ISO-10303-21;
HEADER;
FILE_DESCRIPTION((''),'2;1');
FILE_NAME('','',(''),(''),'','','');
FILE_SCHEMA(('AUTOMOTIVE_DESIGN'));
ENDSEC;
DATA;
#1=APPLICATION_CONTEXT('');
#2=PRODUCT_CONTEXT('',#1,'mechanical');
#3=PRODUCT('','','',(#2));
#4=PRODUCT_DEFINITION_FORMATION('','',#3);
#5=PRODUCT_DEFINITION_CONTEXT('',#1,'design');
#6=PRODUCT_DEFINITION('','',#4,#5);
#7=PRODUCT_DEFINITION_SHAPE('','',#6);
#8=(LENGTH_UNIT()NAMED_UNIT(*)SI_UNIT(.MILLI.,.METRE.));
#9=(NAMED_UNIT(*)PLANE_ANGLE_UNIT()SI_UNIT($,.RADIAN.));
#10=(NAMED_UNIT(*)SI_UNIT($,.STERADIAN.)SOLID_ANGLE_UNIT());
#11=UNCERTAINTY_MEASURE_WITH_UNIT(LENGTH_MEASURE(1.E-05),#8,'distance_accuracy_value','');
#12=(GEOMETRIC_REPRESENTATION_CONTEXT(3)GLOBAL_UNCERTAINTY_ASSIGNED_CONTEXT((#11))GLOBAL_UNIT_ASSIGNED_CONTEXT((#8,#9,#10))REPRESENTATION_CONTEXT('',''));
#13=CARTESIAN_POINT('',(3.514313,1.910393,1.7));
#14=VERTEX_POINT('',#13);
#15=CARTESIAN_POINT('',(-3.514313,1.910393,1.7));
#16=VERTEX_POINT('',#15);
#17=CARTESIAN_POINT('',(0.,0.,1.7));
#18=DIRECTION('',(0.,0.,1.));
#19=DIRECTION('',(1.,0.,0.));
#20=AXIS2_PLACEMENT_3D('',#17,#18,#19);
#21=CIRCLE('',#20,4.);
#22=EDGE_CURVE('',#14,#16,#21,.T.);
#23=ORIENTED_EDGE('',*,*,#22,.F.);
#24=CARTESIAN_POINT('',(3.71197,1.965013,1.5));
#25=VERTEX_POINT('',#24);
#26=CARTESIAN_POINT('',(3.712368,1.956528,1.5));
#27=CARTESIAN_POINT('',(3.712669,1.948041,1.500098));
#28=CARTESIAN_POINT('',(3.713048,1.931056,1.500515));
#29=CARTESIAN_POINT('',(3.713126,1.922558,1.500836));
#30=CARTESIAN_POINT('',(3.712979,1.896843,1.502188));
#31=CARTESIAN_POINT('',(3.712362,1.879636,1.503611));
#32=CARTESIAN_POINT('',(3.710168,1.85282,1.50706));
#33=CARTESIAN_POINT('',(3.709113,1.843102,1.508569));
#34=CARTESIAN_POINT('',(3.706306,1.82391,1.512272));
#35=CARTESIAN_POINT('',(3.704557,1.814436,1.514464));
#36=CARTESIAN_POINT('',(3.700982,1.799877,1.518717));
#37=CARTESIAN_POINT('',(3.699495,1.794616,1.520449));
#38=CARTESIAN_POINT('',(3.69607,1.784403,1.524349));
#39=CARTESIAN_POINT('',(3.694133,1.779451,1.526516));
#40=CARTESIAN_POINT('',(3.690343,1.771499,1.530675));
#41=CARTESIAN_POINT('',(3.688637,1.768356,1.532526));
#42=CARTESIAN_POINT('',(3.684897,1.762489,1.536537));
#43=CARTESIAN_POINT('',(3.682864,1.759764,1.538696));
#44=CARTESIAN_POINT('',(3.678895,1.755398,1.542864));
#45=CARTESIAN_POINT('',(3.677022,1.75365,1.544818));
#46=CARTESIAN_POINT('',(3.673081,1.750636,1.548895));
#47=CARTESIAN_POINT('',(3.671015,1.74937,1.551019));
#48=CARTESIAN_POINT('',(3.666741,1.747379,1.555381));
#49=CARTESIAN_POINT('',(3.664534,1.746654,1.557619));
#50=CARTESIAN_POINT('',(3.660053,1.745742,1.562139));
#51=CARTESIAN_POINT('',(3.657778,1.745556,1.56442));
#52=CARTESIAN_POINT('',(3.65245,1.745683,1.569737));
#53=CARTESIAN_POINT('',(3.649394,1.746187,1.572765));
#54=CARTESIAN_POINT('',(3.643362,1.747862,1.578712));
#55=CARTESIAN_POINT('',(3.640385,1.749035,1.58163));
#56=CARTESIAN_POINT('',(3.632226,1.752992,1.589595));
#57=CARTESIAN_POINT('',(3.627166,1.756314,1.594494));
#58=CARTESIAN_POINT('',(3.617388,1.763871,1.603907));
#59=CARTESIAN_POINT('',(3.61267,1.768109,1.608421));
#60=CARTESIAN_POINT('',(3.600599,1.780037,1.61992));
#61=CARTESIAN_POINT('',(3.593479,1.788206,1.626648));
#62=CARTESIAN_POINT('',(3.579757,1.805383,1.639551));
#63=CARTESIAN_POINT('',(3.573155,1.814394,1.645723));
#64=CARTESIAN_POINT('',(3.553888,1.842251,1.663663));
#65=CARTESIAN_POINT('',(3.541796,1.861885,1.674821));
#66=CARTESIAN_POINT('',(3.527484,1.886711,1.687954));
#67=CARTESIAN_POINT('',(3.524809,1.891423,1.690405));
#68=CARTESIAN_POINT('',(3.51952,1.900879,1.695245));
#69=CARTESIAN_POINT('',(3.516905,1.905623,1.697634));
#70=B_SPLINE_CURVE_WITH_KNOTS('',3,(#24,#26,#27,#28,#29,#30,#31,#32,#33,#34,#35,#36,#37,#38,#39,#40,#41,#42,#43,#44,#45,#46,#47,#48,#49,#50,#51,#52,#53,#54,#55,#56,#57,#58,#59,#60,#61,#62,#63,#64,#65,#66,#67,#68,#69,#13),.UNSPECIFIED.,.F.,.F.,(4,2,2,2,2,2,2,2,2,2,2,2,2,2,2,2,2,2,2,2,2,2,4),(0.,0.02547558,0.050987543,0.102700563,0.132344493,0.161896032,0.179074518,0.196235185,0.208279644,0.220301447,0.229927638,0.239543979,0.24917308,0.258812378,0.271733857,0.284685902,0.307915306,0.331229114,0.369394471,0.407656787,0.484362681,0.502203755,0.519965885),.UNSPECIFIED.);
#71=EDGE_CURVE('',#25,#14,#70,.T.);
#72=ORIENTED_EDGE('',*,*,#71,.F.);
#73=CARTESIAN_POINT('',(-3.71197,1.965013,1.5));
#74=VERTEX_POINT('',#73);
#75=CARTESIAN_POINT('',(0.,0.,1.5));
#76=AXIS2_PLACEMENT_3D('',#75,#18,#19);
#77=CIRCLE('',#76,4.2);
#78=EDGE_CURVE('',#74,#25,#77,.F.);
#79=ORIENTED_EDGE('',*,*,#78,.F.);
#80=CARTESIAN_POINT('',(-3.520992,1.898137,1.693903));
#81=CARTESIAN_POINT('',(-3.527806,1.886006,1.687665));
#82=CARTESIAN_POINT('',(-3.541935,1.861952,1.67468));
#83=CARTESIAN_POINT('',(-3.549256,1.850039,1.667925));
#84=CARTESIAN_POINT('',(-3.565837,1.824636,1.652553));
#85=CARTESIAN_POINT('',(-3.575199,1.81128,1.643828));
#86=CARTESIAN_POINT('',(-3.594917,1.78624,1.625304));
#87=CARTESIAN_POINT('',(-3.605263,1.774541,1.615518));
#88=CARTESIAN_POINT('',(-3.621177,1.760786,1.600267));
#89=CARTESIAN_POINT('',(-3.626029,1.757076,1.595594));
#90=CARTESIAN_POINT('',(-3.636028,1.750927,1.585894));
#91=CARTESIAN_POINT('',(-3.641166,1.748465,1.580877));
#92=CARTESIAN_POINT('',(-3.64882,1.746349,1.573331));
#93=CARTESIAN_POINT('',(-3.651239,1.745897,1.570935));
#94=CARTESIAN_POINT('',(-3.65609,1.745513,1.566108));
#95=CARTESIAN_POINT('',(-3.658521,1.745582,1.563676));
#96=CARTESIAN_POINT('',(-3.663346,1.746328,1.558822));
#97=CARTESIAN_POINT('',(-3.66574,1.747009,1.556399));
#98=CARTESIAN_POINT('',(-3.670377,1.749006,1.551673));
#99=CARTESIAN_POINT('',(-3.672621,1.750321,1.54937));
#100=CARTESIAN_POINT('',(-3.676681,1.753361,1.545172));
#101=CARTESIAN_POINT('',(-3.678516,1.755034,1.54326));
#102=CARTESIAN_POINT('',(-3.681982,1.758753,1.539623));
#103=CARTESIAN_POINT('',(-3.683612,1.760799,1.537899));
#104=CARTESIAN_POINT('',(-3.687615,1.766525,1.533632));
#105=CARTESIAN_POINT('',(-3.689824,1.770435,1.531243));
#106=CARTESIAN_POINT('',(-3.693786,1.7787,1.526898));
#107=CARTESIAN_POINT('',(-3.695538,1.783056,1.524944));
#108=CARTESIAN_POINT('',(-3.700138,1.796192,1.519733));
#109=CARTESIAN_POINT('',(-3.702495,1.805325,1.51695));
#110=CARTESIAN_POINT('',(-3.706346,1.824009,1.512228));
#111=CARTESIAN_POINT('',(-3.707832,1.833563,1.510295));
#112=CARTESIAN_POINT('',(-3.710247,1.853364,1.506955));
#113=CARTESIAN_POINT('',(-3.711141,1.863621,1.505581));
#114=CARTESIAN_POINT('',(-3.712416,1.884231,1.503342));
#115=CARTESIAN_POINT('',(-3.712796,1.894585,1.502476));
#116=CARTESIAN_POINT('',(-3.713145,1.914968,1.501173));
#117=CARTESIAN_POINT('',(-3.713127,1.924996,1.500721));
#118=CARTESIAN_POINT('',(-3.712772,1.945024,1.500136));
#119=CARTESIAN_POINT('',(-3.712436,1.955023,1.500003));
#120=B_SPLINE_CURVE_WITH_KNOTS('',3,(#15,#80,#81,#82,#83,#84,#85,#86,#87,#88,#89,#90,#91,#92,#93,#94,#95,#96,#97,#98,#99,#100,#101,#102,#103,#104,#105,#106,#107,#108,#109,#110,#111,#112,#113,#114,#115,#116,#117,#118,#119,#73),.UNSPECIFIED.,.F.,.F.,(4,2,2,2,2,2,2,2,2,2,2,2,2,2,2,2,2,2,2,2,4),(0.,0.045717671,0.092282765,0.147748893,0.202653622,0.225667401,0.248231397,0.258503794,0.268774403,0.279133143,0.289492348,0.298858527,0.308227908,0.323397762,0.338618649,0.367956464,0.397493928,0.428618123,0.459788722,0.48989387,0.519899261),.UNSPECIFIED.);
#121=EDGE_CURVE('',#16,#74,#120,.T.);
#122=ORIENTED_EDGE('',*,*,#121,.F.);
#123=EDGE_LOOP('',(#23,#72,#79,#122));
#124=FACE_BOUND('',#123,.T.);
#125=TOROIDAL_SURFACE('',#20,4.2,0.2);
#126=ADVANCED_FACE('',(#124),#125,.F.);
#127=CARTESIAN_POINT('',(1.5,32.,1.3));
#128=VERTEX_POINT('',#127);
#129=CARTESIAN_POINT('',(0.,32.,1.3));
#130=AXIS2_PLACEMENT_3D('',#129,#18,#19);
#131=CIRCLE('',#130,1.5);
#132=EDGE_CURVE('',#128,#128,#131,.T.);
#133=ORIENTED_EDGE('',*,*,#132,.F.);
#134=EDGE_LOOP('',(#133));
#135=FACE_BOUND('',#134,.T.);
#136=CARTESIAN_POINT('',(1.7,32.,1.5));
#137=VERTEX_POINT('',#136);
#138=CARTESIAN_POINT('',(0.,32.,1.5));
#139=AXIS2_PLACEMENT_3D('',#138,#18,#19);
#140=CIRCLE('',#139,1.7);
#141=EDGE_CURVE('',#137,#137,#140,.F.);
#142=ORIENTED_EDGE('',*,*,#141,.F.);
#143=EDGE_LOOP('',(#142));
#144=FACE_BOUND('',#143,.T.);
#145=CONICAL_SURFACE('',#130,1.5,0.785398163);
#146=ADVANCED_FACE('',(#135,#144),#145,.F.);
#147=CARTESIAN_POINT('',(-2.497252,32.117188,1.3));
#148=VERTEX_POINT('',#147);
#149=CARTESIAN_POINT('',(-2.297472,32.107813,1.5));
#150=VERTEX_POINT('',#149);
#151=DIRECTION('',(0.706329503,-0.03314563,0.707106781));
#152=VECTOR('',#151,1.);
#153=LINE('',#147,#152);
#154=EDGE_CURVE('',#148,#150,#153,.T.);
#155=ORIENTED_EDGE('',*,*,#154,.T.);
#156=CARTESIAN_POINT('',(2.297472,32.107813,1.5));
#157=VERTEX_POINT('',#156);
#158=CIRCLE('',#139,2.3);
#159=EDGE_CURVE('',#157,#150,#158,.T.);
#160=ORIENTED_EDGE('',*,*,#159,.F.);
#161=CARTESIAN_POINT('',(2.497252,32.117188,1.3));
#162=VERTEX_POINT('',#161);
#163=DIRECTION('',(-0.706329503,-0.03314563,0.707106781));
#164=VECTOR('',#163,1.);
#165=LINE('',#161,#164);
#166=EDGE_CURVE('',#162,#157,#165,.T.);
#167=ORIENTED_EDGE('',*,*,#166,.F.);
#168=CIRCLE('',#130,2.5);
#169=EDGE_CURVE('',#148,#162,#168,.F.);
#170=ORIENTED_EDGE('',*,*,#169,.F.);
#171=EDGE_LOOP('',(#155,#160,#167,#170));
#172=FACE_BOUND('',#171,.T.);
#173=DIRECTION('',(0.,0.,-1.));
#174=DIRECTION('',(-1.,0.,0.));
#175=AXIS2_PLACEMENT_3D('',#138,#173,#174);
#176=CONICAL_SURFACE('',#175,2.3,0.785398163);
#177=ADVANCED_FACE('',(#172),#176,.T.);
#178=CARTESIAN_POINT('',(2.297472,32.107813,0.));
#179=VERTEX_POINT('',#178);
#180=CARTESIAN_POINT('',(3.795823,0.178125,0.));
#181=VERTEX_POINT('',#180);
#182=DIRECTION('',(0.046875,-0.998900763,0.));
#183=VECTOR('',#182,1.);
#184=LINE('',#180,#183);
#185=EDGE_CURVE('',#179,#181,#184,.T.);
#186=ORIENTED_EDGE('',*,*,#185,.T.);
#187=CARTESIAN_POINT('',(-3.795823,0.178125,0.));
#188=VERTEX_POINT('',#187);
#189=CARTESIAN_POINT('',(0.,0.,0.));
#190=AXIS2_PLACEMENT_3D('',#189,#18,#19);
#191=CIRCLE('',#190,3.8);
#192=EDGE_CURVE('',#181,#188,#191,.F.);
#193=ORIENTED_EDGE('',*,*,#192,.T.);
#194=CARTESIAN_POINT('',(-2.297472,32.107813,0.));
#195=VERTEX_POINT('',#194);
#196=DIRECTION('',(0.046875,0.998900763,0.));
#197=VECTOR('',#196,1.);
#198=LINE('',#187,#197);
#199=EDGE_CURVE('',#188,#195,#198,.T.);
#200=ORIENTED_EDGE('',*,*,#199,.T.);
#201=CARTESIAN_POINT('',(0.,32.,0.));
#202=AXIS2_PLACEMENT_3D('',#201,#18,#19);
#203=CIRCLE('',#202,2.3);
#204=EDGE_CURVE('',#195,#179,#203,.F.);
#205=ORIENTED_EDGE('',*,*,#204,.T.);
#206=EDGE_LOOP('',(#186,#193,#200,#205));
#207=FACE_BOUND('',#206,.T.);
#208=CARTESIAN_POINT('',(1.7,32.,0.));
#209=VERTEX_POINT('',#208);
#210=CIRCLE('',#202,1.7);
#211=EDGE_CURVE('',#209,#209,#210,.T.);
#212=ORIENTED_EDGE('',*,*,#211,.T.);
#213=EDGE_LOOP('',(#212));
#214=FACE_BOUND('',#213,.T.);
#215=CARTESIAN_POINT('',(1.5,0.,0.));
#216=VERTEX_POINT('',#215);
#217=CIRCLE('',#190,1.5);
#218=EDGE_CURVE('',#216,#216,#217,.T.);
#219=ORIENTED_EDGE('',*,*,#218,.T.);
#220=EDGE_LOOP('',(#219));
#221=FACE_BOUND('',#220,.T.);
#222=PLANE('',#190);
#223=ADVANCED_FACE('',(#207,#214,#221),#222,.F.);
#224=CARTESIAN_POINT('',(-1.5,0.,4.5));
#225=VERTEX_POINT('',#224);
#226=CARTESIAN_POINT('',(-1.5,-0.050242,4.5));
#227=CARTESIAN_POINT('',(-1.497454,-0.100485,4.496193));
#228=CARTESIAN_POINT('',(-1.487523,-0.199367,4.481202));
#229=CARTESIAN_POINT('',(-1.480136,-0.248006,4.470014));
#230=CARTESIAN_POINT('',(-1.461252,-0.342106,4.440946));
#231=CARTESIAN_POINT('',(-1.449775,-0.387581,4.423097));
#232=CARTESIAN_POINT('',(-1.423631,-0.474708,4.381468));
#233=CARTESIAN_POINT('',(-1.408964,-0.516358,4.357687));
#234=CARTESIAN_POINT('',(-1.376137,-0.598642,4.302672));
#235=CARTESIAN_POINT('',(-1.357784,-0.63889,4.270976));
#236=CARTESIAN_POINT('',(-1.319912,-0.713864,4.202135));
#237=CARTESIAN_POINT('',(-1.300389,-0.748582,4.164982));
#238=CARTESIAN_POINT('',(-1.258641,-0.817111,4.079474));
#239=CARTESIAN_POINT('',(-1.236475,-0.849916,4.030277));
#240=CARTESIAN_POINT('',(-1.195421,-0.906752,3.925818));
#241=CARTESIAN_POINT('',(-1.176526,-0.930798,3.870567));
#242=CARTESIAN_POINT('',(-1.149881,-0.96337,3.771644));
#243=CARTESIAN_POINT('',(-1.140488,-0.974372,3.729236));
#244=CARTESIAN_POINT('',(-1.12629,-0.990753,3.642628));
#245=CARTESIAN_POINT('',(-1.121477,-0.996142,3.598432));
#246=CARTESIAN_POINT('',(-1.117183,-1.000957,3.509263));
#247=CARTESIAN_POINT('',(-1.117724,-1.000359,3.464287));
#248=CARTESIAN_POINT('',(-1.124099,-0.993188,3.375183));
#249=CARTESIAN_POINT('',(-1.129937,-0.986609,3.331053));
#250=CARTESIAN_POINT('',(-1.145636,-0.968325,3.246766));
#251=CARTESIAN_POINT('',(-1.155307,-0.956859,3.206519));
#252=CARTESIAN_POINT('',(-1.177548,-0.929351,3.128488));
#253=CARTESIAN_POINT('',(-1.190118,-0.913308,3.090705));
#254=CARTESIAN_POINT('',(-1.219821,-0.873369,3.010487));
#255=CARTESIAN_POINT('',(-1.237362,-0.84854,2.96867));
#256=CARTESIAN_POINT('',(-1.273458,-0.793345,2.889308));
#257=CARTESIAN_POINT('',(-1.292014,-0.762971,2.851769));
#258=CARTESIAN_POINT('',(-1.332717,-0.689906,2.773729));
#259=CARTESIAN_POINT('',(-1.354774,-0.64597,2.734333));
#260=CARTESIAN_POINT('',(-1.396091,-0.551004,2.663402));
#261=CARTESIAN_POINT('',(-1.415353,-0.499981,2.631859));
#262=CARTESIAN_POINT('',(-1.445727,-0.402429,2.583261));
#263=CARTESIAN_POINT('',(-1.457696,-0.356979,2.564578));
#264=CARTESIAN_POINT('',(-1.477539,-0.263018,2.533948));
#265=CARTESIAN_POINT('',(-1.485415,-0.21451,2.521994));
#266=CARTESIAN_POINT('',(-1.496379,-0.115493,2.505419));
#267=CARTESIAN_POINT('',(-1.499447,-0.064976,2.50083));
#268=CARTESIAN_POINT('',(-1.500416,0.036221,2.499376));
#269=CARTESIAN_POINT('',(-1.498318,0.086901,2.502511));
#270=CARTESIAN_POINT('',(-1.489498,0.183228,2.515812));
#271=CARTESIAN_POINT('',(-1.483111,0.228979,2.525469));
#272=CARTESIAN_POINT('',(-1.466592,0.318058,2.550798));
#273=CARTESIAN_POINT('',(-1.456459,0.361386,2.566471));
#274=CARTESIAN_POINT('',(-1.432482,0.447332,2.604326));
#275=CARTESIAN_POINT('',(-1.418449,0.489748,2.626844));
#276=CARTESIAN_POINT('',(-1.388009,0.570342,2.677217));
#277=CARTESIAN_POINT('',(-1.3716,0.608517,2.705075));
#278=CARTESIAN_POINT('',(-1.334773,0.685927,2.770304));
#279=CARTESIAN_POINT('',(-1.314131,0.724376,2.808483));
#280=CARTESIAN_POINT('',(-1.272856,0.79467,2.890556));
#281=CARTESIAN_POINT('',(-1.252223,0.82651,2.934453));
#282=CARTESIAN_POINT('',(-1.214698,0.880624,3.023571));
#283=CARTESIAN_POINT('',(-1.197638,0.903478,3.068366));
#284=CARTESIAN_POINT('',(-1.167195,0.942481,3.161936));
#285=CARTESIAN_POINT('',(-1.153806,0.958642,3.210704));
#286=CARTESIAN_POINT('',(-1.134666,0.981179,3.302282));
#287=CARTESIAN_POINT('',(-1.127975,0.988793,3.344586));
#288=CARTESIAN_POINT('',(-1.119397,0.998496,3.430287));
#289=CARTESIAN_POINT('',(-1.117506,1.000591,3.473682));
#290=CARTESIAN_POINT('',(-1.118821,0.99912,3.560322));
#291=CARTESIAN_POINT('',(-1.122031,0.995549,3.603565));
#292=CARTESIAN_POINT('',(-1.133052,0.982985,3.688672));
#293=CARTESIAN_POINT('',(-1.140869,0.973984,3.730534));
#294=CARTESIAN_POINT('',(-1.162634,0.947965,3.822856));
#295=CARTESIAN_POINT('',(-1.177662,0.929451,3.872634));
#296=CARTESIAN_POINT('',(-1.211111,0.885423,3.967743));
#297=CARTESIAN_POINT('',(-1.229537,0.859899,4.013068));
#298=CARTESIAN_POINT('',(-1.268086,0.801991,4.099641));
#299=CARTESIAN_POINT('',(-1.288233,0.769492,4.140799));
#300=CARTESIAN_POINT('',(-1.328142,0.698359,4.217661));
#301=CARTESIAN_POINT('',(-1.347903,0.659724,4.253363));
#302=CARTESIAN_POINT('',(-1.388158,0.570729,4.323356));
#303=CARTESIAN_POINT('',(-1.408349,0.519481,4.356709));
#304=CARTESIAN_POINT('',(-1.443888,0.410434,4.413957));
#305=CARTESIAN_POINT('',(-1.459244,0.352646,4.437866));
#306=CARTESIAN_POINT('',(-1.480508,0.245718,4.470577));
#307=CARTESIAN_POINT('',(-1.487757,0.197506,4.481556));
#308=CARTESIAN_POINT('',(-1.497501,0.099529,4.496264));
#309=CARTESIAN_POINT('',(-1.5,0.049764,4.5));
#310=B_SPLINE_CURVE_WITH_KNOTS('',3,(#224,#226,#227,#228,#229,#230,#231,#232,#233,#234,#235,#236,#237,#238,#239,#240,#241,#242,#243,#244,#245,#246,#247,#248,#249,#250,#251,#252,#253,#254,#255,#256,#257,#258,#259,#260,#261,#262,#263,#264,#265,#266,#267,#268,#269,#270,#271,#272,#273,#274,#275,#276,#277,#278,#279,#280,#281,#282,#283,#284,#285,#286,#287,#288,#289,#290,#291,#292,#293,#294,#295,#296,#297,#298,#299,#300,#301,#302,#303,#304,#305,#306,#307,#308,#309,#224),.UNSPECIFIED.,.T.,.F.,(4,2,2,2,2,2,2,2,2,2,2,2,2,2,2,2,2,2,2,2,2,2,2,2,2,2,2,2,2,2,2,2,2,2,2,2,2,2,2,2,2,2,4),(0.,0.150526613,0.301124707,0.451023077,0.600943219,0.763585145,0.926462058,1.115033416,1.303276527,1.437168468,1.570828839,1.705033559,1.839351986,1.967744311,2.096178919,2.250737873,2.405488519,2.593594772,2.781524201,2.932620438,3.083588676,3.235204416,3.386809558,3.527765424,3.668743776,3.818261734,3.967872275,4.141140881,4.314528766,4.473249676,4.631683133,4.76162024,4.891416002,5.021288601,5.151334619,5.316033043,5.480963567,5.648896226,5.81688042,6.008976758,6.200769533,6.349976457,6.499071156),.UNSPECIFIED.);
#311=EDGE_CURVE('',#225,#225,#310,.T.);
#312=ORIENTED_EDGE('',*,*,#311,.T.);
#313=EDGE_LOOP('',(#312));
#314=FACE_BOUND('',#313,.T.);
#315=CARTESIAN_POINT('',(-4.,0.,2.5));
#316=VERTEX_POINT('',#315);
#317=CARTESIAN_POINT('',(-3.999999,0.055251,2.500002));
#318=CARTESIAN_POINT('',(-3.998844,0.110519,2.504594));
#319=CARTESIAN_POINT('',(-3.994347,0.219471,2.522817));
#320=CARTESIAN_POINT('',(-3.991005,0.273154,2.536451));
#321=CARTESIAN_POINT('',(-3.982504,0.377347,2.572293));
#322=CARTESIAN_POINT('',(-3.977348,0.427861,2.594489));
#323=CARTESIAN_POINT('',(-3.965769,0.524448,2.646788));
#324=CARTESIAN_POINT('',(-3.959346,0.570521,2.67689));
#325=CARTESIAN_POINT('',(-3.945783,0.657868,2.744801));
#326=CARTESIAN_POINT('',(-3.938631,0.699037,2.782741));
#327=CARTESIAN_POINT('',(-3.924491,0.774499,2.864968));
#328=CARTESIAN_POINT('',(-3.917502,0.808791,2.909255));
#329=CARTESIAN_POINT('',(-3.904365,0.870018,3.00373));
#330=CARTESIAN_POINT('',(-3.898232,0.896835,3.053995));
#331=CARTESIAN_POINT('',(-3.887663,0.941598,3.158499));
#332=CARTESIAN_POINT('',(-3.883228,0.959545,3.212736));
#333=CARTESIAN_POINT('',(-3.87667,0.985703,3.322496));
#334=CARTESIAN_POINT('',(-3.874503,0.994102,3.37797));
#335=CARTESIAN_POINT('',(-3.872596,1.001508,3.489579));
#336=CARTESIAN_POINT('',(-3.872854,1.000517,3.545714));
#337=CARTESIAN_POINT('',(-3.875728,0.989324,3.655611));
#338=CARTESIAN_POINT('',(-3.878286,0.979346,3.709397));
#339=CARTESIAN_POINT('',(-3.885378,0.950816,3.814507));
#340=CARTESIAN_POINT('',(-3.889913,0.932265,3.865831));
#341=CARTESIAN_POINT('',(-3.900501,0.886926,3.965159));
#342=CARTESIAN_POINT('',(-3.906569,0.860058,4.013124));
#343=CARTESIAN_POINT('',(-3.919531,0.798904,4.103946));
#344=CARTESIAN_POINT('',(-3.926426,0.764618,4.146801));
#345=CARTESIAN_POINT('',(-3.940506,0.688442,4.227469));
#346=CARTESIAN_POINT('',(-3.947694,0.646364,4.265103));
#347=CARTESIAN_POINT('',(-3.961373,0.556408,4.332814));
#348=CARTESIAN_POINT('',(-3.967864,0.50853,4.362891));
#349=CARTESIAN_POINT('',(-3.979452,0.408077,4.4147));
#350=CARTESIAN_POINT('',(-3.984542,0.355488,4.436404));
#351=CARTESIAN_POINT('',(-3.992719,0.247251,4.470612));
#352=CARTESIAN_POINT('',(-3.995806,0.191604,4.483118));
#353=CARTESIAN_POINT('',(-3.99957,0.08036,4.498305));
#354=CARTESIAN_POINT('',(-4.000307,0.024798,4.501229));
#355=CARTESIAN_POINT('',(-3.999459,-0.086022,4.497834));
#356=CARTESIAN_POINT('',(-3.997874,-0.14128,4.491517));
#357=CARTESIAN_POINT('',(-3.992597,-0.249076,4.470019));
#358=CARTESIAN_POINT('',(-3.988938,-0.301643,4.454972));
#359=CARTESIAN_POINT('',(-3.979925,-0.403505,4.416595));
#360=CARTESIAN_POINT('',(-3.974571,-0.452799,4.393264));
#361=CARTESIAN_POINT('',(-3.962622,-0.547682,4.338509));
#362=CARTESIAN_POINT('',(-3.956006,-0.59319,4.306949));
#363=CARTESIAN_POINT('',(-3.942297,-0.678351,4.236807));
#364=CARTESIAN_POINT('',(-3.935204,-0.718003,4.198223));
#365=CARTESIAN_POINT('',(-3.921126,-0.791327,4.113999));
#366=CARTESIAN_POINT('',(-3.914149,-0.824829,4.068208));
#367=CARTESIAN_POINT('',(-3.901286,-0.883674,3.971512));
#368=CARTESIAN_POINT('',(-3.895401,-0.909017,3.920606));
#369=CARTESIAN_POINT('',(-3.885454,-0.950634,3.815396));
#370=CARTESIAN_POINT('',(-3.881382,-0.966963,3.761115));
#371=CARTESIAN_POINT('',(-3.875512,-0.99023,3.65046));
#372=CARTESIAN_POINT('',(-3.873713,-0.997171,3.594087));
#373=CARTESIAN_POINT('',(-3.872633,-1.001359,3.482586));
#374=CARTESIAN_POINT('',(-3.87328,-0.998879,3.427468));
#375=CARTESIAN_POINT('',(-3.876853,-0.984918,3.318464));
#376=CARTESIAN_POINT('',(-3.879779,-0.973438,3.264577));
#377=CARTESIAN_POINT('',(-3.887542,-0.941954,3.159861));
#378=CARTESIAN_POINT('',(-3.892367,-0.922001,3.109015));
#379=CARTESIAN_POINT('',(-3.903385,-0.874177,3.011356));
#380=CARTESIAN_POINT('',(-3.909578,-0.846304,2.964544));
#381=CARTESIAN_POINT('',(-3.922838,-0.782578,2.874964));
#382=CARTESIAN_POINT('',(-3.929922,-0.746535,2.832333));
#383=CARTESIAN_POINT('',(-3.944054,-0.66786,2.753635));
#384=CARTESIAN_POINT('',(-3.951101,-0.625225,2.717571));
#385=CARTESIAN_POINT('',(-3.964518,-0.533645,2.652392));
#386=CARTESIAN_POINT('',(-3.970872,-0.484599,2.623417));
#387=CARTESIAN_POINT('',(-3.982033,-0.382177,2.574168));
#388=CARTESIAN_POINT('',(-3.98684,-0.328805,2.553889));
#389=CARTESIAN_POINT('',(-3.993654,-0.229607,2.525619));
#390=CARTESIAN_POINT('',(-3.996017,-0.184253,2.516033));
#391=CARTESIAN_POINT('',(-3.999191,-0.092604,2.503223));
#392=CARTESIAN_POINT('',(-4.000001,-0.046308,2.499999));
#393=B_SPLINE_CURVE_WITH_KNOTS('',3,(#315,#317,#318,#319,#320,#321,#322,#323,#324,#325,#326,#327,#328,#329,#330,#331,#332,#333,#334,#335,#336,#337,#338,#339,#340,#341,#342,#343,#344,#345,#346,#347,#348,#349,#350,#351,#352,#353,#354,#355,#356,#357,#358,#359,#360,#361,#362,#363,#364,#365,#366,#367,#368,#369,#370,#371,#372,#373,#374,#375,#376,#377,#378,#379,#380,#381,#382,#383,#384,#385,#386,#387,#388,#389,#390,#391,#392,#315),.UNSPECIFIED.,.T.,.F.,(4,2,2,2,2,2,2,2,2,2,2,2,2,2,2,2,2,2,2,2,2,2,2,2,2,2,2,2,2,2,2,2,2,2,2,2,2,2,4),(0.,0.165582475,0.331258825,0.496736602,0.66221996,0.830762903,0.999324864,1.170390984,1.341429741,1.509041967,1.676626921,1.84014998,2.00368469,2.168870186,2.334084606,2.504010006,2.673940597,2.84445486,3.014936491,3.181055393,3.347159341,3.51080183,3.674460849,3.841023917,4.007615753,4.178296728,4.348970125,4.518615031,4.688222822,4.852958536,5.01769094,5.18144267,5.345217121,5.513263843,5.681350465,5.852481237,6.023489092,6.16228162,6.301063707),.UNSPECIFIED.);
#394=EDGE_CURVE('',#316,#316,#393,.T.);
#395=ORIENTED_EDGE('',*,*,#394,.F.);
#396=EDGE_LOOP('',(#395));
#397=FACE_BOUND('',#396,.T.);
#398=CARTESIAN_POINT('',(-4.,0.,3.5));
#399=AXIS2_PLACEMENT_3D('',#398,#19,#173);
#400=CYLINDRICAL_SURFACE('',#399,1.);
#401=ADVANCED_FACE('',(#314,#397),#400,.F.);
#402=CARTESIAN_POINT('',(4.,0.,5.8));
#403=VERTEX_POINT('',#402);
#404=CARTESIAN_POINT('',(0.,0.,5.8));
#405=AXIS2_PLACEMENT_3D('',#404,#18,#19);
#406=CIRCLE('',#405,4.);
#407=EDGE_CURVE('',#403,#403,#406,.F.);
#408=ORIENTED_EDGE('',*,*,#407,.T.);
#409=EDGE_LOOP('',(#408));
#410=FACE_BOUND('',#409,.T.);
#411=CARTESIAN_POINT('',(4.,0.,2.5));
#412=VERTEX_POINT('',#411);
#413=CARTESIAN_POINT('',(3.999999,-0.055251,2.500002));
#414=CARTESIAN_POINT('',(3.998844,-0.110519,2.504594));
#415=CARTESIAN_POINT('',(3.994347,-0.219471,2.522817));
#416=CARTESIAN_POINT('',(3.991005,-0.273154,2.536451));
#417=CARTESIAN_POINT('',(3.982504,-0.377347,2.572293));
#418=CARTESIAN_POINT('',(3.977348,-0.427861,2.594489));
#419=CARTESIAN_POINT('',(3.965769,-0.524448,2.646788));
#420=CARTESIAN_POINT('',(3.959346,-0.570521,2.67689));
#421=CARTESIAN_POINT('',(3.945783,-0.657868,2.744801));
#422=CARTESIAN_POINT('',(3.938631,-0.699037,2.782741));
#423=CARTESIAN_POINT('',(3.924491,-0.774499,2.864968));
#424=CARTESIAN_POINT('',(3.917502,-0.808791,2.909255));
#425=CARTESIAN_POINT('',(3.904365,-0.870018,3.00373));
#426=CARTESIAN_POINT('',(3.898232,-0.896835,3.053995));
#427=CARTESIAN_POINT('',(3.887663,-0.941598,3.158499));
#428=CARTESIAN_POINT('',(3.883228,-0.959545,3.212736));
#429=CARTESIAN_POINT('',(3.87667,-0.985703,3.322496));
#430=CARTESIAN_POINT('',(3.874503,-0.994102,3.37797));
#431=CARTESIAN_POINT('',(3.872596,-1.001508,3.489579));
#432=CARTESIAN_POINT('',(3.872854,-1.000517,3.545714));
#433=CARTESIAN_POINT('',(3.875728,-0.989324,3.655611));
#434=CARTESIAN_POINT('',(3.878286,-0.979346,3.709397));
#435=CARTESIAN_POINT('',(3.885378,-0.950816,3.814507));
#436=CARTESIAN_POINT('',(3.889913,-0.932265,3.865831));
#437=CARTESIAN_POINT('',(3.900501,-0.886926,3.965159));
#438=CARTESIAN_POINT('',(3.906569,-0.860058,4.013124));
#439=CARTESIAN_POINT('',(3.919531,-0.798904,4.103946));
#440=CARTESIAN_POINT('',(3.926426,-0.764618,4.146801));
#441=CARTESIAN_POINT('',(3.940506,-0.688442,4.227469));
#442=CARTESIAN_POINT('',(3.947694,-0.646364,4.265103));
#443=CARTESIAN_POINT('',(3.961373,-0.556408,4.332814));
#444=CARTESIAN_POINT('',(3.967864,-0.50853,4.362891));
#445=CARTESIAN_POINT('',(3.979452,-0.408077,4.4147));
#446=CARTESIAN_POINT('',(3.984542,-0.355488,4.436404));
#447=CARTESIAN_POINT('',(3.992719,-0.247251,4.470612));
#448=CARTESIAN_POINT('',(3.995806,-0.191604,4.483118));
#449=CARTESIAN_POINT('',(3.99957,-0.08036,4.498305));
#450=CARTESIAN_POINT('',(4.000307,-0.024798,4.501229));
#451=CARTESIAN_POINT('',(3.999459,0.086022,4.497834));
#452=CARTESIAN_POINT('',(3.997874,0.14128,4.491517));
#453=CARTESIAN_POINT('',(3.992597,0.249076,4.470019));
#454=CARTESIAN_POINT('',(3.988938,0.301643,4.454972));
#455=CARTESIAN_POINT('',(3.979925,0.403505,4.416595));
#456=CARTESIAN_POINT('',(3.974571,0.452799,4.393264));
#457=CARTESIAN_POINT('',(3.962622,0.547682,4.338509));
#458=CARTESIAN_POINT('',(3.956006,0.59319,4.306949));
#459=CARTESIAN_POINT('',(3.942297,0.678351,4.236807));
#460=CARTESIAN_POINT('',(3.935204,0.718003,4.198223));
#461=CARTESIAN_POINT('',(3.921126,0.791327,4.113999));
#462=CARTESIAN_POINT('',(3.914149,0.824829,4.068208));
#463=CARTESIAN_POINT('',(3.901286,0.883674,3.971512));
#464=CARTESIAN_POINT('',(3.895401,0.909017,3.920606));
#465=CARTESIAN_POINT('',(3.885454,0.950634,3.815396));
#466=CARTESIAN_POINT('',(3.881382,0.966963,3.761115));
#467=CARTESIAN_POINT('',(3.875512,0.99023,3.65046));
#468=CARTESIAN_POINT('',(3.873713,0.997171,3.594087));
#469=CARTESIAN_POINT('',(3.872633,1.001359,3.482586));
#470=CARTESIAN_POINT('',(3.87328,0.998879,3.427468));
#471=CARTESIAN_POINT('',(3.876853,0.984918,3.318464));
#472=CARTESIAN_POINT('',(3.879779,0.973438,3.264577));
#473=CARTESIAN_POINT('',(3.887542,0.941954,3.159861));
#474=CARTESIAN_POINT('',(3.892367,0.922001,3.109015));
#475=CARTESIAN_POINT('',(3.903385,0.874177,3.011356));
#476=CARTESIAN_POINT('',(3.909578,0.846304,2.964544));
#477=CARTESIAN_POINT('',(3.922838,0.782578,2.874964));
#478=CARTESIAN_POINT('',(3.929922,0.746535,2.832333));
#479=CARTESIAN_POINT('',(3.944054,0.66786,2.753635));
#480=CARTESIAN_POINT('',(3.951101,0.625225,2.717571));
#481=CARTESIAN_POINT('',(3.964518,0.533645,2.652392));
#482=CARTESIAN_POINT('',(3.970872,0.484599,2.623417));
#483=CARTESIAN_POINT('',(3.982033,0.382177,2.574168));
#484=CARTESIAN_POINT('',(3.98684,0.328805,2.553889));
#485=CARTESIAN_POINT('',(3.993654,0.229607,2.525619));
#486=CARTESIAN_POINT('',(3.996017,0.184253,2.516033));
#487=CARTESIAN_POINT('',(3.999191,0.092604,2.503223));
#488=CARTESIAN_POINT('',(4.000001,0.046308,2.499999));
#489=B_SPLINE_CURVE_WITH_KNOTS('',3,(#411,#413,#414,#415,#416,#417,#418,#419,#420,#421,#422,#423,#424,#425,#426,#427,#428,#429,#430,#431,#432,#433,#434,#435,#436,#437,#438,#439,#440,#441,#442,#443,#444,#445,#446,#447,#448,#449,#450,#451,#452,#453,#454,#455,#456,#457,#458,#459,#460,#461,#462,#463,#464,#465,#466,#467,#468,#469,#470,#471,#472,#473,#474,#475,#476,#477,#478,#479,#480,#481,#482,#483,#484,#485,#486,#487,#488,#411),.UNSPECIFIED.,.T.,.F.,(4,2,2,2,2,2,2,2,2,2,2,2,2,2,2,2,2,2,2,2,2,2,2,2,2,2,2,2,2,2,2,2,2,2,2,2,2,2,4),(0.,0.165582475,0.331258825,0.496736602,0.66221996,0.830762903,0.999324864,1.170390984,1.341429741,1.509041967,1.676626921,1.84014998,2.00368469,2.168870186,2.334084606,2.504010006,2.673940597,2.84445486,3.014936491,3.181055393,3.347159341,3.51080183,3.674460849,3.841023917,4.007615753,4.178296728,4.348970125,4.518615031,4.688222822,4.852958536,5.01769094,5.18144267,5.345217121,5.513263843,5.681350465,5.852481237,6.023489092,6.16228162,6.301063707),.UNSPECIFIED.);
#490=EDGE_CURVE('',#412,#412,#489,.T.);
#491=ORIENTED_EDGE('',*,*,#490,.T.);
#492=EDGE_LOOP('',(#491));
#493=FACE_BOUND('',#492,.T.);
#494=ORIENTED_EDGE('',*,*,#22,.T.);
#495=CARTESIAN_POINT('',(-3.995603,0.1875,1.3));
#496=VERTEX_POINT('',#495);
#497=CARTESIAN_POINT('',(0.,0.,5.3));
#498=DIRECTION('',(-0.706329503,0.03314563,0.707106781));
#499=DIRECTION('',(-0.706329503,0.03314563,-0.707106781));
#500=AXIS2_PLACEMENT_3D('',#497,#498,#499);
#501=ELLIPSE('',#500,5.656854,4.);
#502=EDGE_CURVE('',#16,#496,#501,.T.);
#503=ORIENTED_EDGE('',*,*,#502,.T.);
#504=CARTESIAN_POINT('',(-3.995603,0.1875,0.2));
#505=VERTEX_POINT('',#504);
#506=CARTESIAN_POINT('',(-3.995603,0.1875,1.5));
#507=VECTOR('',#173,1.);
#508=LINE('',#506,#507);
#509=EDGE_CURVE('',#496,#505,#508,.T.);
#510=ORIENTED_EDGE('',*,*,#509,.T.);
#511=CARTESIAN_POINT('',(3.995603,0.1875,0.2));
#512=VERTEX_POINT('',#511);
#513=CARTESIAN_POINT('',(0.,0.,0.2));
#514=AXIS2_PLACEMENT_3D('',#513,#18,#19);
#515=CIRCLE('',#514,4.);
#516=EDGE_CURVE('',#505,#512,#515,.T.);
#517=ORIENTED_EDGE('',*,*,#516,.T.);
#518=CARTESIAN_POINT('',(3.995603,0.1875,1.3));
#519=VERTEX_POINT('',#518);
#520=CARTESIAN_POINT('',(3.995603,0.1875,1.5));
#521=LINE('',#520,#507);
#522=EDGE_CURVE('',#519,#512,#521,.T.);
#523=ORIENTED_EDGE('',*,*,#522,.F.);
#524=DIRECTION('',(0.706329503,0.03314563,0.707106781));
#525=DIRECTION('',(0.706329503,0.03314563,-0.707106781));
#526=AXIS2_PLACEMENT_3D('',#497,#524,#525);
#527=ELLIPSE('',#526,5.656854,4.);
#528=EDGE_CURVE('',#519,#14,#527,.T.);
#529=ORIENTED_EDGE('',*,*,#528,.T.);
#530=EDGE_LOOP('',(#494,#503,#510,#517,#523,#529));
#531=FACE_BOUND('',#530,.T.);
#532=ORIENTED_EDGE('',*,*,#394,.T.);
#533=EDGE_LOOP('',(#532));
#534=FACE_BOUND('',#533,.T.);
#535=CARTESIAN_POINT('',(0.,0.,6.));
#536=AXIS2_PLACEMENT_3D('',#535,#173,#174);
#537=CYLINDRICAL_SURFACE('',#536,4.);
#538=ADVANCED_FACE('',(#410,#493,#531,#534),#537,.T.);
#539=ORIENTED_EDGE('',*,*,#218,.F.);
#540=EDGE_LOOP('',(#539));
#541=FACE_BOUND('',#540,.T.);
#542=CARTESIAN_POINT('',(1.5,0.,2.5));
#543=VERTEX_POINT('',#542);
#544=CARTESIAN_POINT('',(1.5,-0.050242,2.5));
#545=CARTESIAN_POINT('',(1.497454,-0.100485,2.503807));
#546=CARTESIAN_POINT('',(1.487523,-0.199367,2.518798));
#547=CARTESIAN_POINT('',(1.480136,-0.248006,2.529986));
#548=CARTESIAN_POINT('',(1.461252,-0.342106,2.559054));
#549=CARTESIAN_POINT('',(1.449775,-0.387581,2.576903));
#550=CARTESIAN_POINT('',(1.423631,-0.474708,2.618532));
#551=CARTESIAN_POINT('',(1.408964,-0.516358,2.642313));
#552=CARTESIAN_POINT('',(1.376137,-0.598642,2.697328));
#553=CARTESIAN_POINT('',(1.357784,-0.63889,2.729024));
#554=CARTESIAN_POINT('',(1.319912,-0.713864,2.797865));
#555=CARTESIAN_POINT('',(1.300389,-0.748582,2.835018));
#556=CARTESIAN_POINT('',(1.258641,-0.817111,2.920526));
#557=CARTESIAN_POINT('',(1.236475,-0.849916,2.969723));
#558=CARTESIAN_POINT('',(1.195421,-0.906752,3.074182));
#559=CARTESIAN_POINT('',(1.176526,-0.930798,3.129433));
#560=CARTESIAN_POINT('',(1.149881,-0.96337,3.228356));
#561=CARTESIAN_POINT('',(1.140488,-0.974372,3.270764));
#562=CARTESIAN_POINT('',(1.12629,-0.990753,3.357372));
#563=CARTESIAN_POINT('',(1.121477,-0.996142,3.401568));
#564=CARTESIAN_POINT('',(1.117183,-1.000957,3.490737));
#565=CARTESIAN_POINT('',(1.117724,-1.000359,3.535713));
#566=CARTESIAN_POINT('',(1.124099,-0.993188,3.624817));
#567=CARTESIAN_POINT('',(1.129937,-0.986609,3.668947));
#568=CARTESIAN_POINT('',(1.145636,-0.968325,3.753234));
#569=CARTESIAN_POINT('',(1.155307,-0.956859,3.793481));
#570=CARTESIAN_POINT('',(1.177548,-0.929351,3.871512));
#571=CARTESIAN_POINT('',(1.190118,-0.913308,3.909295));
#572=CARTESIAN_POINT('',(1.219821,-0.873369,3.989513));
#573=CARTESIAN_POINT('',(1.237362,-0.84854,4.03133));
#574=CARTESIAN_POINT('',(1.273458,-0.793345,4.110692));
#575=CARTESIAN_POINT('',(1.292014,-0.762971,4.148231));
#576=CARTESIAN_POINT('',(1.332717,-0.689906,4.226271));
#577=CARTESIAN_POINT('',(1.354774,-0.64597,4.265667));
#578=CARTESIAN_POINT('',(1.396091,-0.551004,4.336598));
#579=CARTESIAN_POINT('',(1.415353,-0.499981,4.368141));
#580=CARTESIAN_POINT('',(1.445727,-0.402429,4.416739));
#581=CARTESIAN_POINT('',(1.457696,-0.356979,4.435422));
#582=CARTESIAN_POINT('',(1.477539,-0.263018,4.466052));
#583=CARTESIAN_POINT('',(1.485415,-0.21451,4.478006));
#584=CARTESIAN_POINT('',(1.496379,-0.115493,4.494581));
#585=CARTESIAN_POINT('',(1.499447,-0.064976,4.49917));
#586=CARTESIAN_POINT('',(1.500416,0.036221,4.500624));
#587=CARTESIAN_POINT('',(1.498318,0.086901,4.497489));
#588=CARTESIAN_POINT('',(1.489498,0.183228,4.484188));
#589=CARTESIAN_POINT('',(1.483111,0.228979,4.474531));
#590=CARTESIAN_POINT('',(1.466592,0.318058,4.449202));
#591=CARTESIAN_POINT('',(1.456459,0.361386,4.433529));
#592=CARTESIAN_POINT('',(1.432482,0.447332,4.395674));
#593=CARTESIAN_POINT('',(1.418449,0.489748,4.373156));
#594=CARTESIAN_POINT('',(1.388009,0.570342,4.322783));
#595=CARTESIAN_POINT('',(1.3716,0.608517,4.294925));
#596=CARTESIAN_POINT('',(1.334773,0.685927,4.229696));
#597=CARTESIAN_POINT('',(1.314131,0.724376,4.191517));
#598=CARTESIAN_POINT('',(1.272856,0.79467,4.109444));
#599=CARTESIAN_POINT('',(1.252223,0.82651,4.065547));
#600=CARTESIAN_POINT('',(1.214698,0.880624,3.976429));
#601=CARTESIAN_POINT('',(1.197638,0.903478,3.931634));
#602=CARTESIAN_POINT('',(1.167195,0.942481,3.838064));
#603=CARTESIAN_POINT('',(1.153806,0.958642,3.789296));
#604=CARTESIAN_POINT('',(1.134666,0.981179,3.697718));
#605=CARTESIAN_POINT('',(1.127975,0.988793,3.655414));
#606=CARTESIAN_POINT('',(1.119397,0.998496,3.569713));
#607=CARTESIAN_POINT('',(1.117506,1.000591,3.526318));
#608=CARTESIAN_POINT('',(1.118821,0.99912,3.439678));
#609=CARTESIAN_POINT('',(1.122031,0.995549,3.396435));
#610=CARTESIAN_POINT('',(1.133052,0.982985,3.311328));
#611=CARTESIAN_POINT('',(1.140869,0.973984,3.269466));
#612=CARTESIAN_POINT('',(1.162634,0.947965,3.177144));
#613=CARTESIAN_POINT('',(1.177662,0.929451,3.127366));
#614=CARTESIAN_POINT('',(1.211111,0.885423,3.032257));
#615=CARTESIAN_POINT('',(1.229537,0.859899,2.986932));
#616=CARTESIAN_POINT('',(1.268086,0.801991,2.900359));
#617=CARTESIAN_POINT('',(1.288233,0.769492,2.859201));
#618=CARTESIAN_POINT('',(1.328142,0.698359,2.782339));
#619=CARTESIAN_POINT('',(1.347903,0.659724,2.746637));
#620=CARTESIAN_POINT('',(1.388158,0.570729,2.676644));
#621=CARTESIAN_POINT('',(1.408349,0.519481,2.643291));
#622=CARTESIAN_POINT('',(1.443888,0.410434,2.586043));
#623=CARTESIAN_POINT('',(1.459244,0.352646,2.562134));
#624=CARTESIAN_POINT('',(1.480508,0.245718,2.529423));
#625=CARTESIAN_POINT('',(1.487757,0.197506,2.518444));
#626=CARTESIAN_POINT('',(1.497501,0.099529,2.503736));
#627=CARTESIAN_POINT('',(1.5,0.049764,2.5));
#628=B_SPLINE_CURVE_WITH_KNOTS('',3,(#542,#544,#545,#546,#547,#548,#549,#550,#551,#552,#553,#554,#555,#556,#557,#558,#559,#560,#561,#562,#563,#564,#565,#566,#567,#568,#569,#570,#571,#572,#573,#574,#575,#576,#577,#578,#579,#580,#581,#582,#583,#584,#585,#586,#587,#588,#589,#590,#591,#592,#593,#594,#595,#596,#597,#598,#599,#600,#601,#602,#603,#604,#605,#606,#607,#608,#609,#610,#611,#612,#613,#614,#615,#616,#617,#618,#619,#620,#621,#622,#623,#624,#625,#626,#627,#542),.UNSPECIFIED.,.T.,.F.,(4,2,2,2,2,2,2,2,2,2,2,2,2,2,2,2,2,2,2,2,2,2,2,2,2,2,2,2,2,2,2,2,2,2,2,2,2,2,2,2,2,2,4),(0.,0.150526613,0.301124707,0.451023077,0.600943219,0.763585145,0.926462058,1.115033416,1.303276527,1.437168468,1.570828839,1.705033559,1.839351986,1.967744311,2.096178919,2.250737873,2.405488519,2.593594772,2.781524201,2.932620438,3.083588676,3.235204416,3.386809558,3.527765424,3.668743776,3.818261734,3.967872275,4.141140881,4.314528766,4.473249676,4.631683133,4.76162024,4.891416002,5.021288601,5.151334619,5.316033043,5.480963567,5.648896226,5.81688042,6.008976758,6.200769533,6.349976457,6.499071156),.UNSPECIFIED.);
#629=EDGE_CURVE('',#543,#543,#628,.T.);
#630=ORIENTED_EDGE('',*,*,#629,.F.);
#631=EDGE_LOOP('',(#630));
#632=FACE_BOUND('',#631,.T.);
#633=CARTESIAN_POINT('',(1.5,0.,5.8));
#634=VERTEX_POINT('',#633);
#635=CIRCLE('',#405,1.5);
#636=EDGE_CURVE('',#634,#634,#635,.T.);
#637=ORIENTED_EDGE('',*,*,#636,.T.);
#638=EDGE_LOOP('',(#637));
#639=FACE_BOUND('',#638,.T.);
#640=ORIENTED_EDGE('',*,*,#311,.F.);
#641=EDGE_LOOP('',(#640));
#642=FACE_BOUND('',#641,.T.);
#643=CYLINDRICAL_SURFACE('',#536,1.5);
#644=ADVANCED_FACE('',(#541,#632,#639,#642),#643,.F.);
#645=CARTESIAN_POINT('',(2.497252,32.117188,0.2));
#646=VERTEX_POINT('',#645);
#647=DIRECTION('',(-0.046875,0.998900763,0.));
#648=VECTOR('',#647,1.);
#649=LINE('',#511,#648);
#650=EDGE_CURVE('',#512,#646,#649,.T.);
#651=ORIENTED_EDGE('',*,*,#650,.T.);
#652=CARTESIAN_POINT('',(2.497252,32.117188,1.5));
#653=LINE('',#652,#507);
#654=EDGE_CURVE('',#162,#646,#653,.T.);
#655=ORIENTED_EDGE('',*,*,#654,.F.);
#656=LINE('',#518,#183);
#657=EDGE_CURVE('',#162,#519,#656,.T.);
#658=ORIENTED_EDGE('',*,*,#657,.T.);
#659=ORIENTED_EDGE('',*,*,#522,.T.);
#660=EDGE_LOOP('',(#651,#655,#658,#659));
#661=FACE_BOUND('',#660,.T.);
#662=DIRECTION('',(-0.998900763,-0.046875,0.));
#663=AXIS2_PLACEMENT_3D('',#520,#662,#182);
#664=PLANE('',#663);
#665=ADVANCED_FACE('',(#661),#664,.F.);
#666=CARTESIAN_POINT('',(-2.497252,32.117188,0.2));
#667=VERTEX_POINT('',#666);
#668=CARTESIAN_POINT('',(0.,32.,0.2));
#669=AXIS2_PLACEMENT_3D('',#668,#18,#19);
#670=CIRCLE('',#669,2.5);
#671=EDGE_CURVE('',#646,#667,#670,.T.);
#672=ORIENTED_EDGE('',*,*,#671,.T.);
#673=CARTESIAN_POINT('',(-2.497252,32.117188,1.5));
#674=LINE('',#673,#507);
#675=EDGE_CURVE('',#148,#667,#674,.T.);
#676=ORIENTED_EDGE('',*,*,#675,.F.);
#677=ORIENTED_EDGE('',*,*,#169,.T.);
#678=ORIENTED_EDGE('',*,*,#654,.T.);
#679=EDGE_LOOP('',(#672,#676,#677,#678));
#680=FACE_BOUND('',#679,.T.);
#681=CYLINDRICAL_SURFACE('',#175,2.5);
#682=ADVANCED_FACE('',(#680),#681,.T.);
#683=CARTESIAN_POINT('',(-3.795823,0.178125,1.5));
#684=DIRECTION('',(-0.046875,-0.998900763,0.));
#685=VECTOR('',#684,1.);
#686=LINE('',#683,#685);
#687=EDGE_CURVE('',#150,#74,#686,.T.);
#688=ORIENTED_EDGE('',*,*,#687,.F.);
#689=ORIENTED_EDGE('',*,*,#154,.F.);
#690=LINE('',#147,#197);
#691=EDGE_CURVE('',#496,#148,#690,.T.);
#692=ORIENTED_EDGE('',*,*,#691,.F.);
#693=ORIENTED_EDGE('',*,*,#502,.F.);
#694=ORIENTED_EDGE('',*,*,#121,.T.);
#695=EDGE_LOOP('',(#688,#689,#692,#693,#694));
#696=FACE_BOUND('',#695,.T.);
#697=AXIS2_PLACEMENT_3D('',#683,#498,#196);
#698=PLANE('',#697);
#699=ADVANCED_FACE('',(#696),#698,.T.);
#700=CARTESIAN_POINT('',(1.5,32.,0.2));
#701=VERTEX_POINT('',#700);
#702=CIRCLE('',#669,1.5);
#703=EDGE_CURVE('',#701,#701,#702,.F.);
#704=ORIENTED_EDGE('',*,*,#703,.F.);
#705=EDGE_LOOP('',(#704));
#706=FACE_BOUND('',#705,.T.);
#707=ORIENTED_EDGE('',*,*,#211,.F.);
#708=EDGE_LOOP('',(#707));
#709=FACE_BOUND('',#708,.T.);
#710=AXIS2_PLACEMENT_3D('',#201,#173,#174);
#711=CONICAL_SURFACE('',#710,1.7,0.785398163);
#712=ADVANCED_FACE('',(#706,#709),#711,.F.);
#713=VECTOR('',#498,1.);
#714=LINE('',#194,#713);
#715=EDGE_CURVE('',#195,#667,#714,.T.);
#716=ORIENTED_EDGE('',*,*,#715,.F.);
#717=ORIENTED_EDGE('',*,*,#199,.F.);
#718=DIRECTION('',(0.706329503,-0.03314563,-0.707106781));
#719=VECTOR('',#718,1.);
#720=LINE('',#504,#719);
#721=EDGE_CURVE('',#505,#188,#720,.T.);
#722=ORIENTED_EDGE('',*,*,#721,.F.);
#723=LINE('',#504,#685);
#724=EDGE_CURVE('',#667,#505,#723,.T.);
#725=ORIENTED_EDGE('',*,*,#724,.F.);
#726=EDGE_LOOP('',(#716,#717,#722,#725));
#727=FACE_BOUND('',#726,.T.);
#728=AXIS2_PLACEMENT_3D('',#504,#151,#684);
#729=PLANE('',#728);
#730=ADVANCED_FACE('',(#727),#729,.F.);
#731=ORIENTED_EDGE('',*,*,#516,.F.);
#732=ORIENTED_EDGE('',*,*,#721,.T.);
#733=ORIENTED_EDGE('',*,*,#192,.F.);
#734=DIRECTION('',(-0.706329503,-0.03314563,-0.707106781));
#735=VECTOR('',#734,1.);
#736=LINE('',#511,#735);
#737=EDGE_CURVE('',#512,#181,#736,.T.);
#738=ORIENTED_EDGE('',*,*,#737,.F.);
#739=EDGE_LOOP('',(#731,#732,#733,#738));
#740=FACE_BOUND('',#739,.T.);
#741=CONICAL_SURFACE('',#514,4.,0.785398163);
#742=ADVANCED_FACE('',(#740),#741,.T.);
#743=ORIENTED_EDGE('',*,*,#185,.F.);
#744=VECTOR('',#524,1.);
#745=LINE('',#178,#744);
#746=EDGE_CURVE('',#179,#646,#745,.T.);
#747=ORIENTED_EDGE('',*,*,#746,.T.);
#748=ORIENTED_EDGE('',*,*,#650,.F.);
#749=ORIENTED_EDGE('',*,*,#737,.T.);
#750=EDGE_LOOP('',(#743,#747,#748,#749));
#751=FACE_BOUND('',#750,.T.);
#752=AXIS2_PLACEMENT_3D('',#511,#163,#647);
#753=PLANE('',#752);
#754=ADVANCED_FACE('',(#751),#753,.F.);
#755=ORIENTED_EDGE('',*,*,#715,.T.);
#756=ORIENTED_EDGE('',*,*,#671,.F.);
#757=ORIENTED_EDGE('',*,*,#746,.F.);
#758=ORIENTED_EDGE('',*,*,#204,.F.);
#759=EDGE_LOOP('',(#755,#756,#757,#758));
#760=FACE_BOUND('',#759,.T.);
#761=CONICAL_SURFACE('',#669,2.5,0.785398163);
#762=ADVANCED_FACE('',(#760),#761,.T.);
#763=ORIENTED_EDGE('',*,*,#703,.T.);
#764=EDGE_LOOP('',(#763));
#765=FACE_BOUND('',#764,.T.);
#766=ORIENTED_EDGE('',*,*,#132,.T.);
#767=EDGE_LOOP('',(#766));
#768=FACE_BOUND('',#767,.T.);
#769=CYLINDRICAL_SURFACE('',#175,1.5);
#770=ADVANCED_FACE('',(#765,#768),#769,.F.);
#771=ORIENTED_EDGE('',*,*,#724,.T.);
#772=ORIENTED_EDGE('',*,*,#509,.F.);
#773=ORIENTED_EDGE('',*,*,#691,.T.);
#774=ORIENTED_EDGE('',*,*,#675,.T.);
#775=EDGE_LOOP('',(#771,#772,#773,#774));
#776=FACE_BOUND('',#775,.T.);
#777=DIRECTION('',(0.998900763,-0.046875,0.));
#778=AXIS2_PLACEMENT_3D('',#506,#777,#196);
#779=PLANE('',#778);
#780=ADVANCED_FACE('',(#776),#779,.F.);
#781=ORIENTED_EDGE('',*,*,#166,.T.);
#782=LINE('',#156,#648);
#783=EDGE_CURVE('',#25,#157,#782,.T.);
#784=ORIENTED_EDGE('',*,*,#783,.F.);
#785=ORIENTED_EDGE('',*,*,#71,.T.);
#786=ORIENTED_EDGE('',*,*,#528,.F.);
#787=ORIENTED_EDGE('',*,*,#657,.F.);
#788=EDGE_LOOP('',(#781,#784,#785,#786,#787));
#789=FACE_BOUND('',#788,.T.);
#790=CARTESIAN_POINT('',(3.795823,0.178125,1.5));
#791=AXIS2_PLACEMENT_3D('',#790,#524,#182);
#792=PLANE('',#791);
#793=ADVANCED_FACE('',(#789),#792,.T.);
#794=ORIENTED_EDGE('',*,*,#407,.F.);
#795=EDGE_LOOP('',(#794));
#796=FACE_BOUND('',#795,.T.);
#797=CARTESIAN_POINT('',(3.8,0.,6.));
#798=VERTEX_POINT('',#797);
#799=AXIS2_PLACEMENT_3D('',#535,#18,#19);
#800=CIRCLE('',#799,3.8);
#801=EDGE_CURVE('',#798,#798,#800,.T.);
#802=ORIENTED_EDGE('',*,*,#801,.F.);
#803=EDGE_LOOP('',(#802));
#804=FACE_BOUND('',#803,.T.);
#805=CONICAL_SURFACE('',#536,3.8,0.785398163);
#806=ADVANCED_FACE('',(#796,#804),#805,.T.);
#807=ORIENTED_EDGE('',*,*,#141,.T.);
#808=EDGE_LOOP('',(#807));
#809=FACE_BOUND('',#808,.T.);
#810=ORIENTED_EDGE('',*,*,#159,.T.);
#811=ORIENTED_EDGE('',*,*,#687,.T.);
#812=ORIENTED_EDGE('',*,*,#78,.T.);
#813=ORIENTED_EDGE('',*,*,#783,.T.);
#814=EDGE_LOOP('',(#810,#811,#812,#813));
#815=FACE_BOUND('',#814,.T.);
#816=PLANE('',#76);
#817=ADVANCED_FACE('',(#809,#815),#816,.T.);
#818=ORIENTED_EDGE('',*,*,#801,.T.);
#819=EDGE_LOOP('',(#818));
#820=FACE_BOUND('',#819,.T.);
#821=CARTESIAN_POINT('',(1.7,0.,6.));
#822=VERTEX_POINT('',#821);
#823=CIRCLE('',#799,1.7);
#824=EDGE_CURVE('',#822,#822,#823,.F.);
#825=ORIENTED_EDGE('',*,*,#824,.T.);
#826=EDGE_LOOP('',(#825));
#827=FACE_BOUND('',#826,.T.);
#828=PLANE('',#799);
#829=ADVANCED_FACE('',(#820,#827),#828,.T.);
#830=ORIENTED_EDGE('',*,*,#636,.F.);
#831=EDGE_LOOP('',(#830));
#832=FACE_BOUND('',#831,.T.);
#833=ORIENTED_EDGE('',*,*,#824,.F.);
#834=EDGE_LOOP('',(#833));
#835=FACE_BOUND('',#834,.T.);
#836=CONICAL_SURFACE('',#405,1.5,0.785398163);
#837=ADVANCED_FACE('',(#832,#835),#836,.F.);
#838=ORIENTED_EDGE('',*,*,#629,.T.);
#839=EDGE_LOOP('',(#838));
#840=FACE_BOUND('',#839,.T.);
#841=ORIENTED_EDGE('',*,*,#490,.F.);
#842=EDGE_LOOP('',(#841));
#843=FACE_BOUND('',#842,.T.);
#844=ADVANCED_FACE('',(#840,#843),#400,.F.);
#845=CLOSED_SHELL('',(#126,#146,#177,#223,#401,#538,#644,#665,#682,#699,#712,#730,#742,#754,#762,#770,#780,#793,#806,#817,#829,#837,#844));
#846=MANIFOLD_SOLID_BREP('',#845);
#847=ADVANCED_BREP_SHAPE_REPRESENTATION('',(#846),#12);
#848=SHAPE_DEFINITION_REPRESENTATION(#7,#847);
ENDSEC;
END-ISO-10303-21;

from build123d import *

# Parameters (mm, degrees)
SKETCH1_R               = 4
SKETCH1_R_2             = 1.5
BOSS_EXTRUDE1_DEPTH     = 6
SKETCH2_R               = 1.5000000000000004
BOSS_EXTRUDE2_DEPTH     = 1.5
CUT_EXTRUDE1_DEPTH      = 36.245567097154215
CUT_EXTRUDE1_DEPTH_BACK = 36.245567097154215
SKETCH3_R               = 1.0000000000000002
CHAMFER1_SIZE           = 0.2
FILLET1_R               = 0.2


with BuildPart() as part:
    # Sketch1 → Boss-Extrude1 (new body)
    with BuildSketch(Plane.XY):
        Circle(SKETCH1_R)
        Circle(SKETCH1_R_2, mode=Mode.SUBTRACT)
    extrude(amount=BOSS_EXTRUDE1_DEPTH)

    # Sketch2 → Boss-Extrude2 (add)
    with BuildSketch(Plane.XY):
        with BuildLine():
            Line((-3.995603052106154, 0.18750000000000017), (-2.4972519075663464, 32.1171875))
            ThreePointArc((-2.4972519075663464, 32.1171875), (1.5e-16, 34.5), (2.4972519075663464, 32.1171875))
            Line((2.4972519075663464, 32.1171875), (3.995603052106154, 0.18750000000000017))
            ThreePointArc((3.995603052106154, 0.18750000000000017), (2.4e-16, 4.000000000000002), (-3.995603052106154, 0.18750000000000017))
        make_face()
        with Locations((0, 32)):
            Circle(SKETCH2_R, mode=Mode.SUBTRACT)
    extrude(amount=BOSS_EXTRUDE2_DEPTH)

    # Sketch3 → Cut-Extrude1 (cut, two sides: drawn at the far end of the back side and taken through both)
    with BuildSketch(Plane(origin=(0, 0, 0), x_dir=(0, 0, -1), z_dir=(1, 0, 0)).offset(-CUT_EXTRUDE1_DEPTH_BACK)):
        with Locations((-3.5, 0)):
            Circle(SKETCH3_R)
    extrude(amount=CUT_EXTRUDE1_DEPTH + CUT_EXTRUDE1_DEPTH_BACK, mode=Mode.SUBTRACT)

    # Chamfer1
    # the kernel refuses this chamfer: 0.2 mm, written as the material it takes off along each edge
    with BuildSketch(Plane(origin=(0, 0, 0), x_dir=(-0.9989007630265381, 0.04687500000000028, 0), z_dir=(0.04687500000000028, 0.9989007630265381, 0))) as chamfer1_piece_1:
        Polygon((4, CHAMFER1_SIZE), (4 - CHAMFER1_SIZE, 0), (4, 0), align=None)
    revolve(axis=Axis((0, 0, 0), (0, 0, 1)), revolution_arc=182.68672418569162, mode=Mode.SUBTRACT)
    with BuildSketch(Plane(origin=(2.4972519075663464, 32.1171875, 1.5), x_dir=(0.027465652126399, 0.0012888692161212708, -0.9996219169112966), z_dir=(0.04687500000000002, -0.9989007630265381, 0))) as chamfer1_piece_2_section:
        Polygon((CHAMFER1_SIZE * 0.999621916911, -CHAMFER1_SIZE * 0.0274958766106), (-CHAMFER1_SIZE * 0.0274958766106, -CHAMFER1_SIZE * 0.999621916911), (0, 0), align=None)
    chamfer1_piece_2 = extrude(amount=32.4791610144424, mode=Mode.PRIVATE)
    chamfer1_piece_2 = chamfer1_piece_2 - Plane(origin=(0, 0, 1.4336940433446623), x_dir=(1, 0, 0), z_dir=(0, 0, -1)) * Cylinder(4, 66, mode=Mode.PRIVATE)
    add(chamfer1_piece_2, mode=Mode.SUBTRACT)
    with BuildSketch(Plane(origin=(1.1e-16, 32, 1.5), x_dir=(-0.9989007630265381, 0.04687499999999997, 0), z_dir=(-0.04687499999999997, -0.9989007630265381, 0))) as chamfer1_piece_3:
        Polygon((2.5000000000000013 - CHAMFER1_SIZE, 0), (2.5000000000000013, CHAMFER1_SIZE), (2.5000000000000013, 0), align=None)
    revolve(axis=Axis((1.1e-16, 32, 1.5), (0, 0, -1)), revolution_arc=174.62655162861682, mode=Mode.SUBTRACT)
    with BuildSketch(Plane(origin=(-4.019712580118334, -0.32627121978830154, 1.5), x_dir=(0.9985230955407449, -0.046857277355217046, 0.027495876610586282), z_dir=(0.04687500000000002, 0.9989007630265381, 0))) as chamfer1_piece_4_section:
        Polygon((CHAMFER1_SIZE * 0.999621916911, CHAMFER1_SIZE * 0.0274958766106), (-CHAMFER1_SIZE * 0.0274958766106, CHAMFER1_SIZE * 0.999621916911), (0, 0), align=None)
    chamfer1_piece_4 = extrude(amount=32.479161014442404, mode=Mode.PRIVATE)
    chamfer1_piece_4 = chamfer1_piece_4 - Plane(origin=(0, 0, 1.433694043044513), x_dir=(1, 0, 0), z_dir=(0, 0, -1)) * Cylinder(4, 66, mode=Mode.PRIVATE)
    add(chamfer1_piece_4, mode=Mode.SUBTRACT)
    with BuildSketch(Plane(origin=(0, 32, 0), x_dir=(1, 0, 0), z_dir=(0, -1, 0))) as chamfer1_piece_5:
        Polygon((1.5000000000000004 + CHAMFER1_SIZE, 0), (1.5000000000000004, CHAMFER1_SIZE), (1.5000000000000004, 0), align=None)
    revolve(axis=Axis((0, 32, 0), (0, 0, 1)), mode=Mode.SUBTRACT)
    with BuildSketch(Plane(origin=(2.4972519075663464, 32.1171875, 0), x_dir=(-0.9985230955407451, -0.04685727735521706, -0.02749587661058638), z_dir=(0.04687500000000002, -0.9989007630265381, 0))) as chamfer1_piece_6:
        Polygon((CHAMFER1_SIZE * 0.999621916911, -CHAMFER1_SIZE * 0.0274958766106), (-CHAMFER1_SIZE * 0.0274958766106, -CHAMFER1_SIZE * 0.999621916911), (0, 0), align=None)
    extrude(amount=31.96482441684922, mode=Mode.SUBTRACT)
    with BuildSketch(Plane(origin=(1.1e-16, 32, 0), x_dir=(-0.9989007630265381, 0.04687499999999997, 0), z_dir=(-0.04687499999999997, -0.9989007630265381, 0))) as chamfer1_piece_7:
        Polygon((2.5000000000000013 - CHAMFER1_SIZE, 0), (2.5000000000000013, -CHAMFER1_SIZE), (2.5000000000000013, 0), align=None)
    revolve(axis=Axis((1.1e-16, 32, 0), (0, 0, -1)), revolution_arc=174.62655162861682, mode=Mode.SUBTRACT)
    with BuildSketch(Plane(origin=(-3.995603052106154, 0.18750000000000017, 0), x_dir=(0.9985230955407449, -0.04685727735521705, -0.027495876610586376), z_dir=(0.04687500000000002, 0.9989007630265381, 0))) as chamfer1_piece_8:
        Polygon((CHAMFER1_SIZE * 0.999621916911, -CHAMFER1_SIZE * 0.0274958766106), (-CHAMFER1_SIZE * 0.0274958766106, -CHAMFER1_SIZE * 0.999621916911), (0, 0), align=None)
    extrude(amount=31.96482441684922, mode=Mode.SUBTRACT)
    with BuildSketch(Plane(origin=(0, 32, 1.5), x_dir=(1, 0, 0), z_dir=(0, -1, 0))) as chamfer1_piece_9:
        Polygon((1.5000000000000004 + CHAMFER1_SIZE, 0), (1.5000000000000004, -CHAMFER1_SIZE), (1.5000000000000004, 0), align=None)
    revolve(axis=Axis((0, 32, 1.5), (0, 0, 1)), mode=Mode.SUBTRACT)
    with BuildSketch(Plane(origin=(0, 0, 6), x_dir=(1, 0, 0), z_dir=(0, -1, 0))) as chamfer1_piece_10:
        Polygon((4, -CHAMFER1_SIZE), (4 - CHAMFER1_SIZE, 0), (4, 0), align=None)
    revolve(axis=Axis((0, 0, 6), (0, 0, 1)), mode=Mode.SUBTRACT)
    with BuildSketch(Plane(origin=(0, 0, 6), x_dir=(1, 0, 0), z_dir=(0, -1, 0))) as chamfer1_piece_11:
        Polygon((1.5 + CHAMFER1_SIZE, 0), (1.5, -CHAMFER1_SIZE), (1.5, 0), align=None)
    revolve(axis=Axis((0, 0, 6), (0, 0, 1)), mode=Mode.SUBTRACT)
    with BuildSketch(Plane(origin=(0, 0, 0), x_dir=(1, 0, 0), z_dir=(0, -1, 0))) as chamfer1_piece_12:
        Polygon((4, CHAMFER1_SIZE), (4 - CHAMFER1_SIZE, 0), (4, 0), align=None)
    revolve(axis=Axis((0, 0, 0), (0, 0, 1)), revolution_arc=2.686724185691597, mode=Mode.SUBTRACT)

    # Fillet1
    fillet1_edges = [part.edges().sort_by_distance(p)[0] for p in [
        (-1.15197e-12, 4.000000000000002, 1.5),
    ]]
    fillet(fillet1_edges, radius=FILLET1_R)


solid = part.part
